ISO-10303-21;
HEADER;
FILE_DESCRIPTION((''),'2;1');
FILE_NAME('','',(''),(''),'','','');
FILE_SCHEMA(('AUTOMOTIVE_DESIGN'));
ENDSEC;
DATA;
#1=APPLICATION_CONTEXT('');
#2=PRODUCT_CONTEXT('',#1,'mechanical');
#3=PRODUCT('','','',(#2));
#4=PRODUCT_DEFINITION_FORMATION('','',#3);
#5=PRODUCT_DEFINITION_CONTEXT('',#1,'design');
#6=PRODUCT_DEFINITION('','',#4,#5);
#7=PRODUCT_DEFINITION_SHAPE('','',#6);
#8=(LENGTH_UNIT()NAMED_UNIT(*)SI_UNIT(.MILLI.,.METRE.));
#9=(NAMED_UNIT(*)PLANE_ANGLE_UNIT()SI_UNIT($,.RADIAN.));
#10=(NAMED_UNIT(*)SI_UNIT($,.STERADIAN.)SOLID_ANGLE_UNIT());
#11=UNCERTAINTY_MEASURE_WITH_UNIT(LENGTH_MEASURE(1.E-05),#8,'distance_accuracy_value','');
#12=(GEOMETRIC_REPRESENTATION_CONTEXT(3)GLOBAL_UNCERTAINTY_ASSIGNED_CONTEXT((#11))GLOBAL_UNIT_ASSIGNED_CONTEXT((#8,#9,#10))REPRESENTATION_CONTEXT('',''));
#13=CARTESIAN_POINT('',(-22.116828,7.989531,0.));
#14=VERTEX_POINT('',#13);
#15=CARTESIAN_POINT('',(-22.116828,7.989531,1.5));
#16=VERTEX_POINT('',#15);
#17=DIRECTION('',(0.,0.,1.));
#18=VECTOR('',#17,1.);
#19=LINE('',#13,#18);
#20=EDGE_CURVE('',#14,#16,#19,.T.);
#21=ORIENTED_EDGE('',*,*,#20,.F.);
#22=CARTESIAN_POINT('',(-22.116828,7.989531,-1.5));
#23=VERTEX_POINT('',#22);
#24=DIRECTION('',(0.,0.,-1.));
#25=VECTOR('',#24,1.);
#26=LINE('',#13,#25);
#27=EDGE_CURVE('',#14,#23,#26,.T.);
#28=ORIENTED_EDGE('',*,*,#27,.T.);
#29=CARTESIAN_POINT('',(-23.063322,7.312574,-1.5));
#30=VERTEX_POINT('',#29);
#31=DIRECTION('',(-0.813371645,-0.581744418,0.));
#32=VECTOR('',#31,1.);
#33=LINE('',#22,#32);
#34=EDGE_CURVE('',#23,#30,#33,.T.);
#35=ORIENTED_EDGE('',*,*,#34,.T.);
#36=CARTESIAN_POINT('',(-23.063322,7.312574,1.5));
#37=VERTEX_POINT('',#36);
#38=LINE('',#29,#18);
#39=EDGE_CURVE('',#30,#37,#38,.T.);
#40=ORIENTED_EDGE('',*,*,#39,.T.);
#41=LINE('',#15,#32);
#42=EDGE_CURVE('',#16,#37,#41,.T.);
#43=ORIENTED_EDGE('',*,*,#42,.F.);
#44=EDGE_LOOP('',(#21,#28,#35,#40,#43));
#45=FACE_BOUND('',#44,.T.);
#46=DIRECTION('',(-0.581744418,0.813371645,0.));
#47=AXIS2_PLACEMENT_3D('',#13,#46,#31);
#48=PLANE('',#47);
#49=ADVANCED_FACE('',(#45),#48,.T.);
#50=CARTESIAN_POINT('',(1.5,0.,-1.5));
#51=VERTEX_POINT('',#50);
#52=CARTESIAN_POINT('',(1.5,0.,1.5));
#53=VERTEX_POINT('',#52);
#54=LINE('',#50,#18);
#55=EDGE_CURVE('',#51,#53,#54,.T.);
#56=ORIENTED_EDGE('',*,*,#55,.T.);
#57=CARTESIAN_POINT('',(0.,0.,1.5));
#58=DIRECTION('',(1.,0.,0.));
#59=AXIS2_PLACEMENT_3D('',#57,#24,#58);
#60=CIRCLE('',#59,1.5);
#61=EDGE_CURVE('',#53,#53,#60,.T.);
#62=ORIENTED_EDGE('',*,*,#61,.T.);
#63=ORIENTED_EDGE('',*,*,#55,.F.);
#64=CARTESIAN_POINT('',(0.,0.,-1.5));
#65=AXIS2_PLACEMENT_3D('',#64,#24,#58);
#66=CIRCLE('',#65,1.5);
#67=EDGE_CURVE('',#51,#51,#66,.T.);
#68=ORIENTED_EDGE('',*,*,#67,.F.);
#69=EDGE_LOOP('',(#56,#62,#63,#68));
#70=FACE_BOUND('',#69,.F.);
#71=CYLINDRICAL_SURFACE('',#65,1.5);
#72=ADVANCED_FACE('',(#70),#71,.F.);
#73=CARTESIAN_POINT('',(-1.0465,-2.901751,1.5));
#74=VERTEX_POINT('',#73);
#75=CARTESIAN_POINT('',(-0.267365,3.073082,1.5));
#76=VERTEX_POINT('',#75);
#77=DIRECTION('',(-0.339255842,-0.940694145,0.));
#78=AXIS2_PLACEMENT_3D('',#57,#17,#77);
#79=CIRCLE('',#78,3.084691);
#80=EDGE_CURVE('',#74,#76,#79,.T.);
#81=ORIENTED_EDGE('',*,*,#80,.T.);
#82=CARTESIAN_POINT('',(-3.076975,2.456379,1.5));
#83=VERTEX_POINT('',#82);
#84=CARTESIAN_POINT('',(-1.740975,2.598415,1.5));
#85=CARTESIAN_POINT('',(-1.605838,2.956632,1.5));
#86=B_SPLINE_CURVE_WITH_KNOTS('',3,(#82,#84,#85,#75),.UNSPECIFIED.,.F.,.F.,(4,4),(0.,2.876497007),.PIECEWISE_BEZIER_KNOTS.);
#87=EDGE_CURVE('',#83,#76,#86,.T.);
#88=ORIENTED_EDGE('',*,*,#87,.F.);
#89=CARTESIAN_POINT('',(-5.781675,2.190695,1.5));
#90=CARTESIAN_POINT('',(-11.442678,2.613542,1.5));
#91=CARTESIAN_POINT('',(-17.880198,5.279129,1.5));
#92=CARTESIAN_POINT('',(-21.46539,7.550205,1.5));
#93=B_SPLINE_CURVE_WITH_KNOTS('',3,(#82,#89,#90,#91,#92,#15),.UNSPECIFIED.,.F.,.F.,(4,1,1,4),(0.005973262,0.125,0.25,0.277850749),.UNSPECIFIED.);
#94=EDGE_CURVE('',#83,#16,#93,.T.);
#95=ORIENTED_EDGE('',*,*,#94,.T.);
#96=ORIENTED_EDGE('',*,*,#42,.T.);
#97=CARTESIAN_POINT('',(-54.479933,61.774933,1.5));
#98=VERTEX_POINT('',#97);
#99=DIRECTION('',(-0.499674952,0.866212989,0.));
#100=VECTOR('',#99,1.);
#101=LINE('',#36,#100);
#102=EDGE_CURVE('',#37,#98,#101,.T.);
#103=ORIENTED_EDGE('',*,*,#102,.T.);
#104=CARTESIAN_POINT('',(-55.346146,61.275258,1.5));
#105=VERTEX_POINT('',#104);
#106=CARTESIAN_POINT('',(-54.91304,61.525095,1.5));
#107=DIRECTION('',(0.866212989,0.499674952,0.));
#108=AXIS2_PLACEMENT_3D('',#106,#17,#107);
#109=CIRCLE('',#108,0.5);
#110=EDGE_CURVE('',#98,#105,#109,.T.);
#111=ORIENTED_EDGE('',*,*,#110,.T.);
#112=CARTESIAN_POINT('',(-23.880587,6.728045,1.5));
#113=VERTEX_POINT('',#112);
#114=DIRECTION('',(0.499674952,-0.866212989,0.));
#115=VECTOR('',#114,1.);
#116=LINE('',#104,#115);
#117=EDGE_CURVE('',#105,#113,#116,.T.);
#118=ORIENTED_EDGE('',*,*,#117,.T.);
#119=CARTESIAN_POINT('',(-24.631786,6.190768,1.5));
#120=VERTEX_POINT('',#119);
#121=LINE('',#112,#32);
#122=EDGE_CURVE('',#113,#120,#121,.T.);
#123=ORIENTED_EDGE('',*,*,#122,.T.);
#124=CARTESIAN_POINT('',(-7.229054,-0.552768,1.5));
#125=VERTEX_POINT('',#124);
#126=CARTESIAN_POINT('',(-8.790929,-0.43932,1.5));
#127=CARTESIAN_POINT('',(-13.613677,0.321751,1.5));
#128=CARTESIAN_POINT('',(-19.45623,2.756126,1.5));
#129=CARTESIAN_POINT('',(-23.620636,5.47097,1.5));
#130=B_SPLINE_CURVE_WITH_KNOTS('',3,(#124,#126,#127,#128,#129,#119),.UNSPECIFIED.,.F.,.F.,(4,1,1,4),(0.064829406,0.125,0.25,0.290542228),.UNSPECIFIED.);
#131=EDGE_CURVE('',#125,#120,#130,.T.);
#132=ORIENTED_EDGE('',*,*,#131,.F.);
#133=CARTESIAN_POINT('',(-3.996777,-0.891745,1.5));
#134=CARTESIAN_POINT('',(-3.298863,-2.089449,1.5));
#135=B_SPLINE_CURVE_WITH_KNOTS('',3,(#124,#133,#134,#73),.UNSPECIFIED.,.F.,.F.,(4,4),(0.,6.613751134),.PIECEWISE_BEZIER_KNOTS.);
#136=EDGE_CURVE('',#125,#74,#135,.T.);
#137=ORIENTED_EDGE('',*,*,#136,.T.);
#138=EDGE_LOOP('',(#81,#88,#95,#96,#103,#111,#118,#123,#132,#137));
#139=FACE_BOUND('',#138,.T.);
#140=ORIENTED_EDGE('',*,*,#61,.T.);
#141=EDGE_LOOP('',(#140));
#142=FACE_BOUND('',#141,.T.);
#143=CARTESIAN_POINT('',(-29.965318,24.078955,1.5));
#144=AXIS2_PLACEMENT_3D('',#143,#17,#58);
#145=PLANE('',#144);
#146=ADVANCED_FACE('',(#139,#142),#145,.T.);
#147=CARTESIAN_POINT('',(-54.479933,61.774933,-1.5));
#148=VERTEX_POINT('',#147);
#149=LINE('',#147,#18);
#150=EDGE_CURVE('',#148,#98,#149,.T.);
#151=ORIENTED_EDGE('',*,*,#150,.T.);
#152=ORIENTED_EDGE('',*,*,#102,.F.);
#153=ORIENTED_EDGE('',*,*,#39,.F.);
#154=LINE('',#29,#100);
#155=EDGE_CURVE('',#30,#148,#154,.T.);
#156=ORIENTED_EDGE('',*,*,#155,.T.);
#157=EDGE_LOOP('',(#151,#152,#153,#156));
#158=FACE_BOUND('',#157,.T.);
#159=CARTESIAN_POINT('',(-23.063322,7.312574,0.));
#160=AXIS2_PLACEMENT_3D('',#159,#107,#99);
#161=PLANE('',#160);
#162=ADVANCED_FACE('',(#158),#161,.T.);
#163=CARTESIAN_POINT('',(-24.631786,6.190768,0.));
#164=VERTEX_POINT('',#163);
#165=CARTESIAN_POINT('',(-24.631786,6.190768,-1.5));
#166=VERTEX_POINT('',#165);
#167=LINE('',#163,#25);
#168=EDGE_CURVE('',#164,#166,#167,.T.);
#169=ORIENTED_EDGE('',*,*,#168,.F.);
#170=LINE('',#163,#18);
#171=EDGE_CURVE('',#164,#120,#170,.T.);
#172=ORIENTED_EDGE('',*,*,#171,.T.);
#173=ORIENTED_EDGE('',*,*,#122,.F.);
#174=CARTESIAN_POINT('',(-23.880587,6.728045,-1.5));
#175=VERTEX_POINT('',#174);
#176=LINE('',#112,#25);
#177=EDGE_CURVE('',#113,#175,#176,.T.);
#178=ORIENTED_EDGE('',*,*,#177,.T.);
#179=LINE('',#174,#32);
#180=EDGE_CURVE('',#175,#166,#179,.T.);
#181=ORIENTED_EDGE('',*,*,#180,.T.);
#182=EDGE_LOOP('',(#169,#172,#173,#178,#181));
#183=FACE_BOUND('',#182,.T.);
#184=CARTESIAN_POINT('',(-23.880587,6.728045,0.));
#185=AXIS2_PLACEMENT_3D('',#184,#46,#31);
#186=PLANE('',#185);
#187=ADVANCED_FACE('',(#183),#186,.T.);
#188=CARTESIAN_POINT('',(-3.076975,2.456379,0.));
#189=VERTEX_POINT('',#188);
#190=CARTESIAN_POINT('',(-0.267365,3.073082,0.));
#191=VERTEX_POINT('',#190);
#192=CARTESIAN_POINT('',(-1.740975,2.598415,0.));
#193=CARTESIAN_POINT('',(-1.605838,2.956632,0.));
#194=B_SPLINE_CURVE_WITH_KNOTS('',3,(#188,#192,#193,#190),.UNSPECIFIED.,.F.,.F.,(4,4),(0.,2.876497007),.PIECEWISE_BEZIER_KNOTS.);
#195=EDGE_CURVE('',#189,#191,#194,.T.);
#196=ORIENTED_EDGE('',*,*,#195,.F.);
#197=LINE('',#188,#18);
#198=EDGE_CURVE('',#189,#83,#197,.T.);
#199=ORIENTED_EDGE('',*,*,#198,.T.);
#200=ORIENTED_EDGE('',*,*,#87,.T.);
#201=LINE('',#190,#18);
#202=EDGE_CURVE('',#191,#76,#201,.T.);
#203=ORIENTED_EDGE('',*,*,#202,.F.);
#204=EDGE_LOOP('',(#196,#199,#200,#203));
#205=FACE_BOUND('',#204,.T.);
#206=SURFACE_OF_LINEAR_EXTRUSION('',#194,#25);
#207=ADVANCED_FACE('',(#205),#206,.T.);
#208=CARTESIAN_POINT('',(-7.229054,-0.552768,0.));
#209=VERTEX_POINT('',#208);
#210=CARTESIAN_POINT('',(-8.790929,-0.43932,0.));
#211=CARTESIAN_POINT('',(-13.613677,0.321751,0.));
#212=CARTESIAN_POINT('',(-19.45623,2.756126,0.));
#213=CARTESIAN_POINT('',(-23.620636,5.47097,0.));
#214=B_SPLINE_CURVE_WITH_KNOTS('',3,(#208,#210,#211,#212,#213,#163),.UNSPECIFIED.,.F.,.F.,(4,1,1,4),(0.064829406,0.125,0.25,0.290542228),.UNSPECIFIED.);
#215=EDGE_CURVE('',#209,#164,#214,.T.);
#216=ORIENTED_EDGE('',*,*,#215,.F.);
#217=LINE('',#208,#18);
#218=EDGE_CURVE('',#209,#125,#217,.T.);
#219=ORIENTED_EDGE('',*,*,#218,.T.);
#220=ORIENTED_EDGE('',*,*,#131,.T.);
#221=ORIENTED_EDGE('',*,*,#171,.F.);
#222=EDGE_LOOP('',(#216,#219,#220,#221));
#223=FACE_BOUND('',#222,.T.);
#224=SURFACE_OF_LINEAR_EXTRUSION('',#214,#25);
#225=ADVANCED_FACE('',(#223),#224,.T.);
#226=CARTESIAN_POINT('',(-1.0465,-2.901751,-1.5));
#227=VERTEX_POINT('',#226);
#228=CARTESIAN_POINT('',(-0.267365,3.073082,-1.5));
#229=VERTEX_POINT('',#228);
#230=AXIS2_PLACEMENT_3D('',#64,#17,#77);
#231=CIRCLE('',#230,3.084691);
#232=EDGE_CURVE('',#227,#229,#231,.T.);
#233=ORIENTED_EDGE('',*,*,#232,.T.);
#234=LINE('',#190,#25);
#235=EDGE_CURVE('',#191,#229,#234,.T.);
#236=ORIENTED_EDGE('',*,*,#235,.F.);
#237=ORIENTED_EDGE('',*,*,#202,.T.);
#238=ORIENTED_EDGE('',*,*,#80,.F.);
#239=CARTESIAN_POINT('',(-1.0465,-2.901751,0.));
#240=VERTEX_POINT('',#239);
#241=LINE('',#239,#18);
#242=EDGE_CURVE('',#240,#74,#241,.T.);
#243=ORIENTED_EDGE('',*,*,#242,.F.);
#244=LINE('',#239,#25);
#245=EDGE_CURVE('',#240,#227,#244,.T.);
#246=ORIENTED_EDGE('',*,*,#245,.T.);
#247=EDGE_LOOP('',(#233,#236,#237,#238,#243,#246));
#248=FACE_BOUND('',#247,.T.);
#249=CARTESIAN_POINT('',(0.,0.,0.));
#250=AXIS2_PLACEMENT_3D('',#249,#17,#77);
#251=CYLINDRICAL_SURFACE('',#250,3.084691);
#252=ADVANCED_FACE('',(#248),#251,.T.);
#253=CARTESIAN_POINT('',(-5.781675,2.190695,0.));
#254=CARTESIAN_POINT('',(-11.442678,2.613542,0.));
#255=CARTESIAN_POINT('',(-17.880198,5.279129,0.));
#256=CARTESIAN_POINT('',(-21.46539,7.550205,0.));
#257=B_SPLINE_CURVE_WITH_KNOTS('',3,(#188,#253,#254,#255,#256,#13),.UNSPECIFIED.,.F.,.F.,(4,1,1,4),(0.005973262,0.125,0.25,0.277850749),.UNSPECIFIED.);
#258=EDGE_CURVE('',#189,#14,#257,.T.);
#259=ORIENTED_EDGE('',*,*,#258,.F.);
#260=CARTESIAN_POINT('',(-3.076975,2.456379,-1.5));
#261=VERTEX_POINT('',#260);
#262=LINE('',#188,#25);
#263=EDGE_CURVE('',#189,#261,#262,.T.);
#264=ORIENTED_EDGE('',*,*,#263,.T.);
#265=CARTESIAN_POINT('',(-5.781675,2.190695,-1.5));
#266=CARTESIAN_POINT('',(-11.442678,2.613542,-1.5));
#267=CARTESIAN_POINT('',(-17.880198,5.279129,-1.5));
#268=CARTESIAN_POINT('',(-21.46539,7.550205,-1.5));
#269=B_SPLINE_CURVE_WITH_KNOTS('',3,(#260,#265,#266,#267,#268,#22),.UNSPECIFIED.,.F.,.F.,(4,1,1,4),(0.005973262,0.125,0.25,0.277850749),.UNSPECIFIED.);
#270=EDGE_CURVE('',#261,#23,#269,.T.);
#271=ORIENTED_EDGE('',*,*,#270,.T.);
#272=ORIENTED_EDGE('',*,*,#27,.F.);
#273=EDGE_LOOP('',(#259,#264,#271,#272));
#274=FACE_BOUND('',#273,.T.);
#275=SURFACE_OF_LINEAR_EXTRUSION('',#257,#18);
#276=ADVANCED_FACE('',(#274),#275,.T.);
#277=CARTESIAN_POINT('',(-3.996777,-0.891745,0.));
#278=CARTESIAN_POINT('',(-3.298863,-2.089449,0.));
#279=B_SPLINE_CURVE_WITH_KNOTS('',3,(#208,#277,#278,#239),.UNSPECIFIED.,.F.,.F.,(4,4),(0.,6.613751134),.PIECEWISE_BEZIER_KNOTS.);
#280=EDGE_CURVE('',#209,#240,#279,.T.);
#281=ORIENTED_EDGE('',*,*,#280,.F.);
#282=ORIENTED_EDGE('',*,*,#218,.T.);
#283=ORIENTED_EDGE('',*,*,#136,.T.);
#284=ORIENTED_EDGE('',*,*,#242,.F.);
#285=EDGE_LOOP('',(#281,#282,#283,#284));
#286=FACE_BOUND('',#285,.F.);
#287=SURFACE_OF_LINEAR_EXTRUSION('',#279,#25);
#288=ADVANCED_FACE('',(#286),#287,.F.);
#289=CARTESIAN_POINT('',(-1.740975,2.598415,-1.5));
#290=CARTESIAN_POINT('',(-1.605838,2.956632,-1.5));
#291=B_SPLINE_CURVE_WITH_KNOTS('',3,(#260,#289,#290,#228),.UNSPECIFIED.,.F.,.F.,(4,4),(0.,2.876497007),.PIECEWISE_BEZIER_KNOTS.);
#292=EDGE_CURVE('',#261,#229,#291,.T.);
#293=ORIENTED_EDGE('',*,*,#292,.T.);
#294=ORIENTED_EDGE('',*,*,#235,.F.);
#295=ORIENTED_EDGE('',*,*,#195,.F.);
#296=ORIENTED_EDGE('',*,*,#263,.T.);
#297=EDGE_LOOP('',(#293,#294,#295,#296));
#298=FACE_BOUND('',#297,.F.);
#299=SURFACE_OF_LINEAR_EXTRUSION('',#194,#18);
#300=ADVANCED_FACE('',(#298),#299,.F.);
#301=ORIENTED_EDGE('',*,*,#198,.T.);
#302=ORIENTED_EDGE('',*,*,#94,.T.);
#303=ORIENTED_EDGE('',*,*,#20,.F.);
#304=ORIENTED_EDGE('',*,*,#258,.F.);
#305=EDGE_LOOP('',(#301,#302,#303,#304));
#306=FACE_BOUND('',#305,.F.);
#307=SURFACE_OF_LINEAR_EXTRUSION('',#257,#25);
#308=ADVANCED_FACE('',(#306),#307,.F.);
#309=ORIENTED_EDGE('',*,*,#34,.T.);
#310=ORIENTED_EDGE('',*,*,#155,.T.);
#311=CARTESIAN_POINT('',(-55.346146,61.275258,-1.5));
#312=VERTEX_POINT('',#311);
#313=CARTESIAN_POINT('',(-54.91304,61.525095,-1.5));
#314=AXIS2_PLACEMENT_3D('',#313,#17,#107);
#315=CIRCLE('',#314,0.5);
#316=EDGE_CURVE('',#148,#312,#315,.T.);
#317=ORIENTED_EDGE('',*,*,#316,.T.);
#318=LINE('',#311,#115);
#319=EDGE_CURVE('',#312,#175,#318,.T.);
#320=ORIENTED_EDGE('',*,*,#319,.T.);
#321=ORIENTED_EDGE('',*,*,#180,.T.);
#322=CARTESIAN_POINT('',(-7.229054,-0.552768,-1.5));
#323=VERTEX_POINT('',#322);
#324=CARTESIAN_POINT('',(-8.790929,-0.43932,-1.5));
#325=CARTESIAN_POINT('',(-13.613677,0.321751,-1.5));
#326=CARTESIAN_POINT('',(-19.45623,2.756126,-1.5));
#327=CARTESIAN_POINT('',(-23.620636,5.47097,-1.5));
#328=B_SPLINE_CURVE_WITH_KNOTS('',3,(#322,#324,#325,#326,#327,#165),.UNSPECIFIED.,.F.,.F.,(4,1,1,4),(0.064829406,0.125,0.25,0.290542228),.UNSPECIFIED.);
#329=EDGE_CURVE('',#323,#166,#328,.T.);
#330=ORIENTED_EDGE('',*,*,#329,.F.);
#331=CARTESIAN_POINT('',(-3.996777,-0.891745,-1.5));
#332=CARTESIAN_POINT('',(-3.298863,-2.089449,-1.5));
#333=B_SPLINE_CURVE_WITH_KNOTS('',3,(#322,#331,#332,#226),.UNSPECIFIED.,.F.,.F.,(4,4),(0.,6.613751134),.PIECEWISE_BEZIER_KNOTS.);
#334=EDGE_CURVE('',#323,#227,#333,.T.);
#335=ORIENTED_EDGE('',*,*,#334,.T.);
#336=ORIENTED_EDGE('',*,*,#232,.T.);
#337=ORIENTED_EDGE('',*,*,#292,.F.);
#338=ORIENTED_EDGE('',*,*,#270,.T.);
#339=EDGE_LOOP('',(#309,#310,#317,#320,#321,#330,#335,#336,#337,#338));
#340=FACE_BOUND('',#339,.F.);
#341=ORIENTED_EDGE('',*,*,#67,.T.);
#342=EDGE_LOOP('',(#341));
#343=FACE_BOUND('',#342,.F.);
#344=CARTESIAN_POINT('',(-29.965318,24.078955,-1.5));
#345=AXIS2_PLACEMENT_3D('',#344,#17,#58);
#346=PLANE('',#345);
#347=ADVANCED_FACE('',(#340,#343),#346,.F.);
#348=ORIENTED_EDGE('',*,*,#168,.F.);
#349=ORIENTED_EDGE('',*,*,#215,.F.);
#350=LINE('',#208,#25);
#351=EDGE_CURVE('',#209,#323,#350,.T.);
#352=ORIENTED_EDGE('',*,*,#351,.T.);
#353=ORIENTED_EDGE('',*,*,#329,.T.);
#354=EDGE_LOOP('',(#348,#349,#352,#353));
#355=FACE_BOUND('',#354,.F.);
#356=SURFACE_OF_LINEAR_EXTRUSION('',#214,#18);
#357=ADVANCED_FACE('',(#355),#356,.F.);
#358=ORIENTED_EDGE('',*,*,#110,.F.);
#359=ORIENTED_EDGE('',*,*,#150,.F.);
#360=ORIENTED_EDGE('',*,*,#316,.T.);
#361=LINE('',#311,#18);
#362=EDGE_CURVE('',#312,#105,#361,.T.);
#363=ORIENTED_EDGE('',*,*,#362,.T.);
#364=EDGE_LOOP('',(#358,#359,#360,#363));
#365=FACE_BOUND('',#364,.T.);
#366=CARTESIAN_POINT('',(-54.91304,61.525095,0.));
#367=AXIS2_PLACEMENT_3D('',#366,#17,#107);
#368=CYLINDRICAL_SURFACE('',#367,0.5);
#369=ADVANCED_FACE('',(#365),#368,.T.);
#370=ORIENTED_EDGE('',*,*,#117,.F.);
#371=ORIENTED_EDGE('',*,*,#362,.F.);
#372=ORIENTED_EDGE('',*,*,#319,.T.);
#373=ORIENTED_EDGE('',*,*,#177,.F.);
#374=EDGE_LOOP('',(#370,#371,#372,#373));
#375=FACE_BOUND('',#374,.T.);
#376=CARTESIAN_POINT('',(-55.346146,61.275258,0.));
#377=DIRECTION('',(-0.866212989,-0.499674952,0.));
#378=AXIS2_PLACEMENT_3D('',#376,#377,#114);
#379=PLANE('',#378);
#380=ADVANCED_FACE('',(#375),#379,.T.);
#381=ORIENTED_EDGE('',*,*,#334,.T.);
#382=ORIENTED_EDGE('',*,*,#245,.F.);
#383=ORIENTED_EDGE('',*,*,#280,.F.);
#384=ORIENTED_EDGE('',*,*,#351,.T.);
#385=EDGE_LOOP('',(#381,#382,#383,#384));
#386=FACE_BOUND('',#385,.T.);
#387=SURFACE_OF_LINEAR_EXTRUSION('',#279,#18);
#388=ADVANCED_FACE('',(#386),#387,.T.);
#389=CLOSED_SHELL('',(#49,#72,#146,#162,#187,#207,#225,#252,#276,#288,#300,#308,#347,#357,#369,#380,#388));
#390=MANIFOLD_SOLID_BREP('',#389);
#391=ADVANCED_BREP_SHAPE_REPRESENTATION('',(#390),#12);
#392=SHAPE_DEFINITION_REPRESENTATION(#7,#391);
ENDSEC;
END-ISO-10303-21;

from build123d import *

# Parameters (mm, degrees)
F1_DEPTH = 1.5
F2_R     = 1.5
F3_DEPTH = 25


# Not quite as in the source:
# - the dataset's text gives a spline's control points without its knots; the knots are read off the source's solid


with BuildPart() as f1:
    # F0 (on Top) → F1 (new body, symmetric)
    with BuildSketch(Plane.XY):
        with BuildLine():
            add(Edge.make_bspline(
                [(-7.2290541015, -0.5527675977), (-3.9967772573, -0.8917449116), (-3.2988634653, -2.0894490401), (-1.0464995032, -2.9017509308)],
                knots=[0, 0, 0, 0, 6.6137511338, 6.6137511338, 6.6137511338, 6.6137511338], degree=3))
            ThreePointArc((-1.0464995032, -2.9017509308), (3.0587935975, -0.3988751709), (-0.2673646533, 3.0730824617))
            add(Edge.make_bspline(
                [(-3.0769753559, 2.4563793473), (-1.7409748989, 2.5984151431), (-1.6058379576, 2.9566324623), (-0.2673646533, 3.0730824617)],
                knots=[0, 0, 0, 0, 2.876497007, 2.876497007, 2.876497007, 2.876497007], degree=3))
            add(Edge.make_bspline(
                [(-3.0769753559, 2.4563793473), (-5.7816746579, 2.1906947352), (-11.4426782467, 2.6135423344), (-17.8801982674, 5.2791288997), (-21.4653904829, 7.5502048837), (-22.1168282691, 7.9895307861)],
                knots=[0.005973262, 0.005973262, 0.005973262, 0.005973262, 0.125, 0.25, 0.277850749, 0.277850749, 0.277850749, 0.277850749], degree=3))
            Line((-22.1168282691, 7.9895307861), (-23.0633222923, 7.3125738031))
            Line((-23.0633222923, 7.3125738031), (-54.4799332581, 61.7749325905))
            ThreePointArc((-54.4799332581, 61.7749325905), (-55.1628772285, 61.9582016093), (-55.3461462473, 61.2752576388))
            Line((-55.3461462473, 61.2752576388), (-23.8805872256, 6.7280448046))
            Line((-23.8805872256, 6.7280448046), (-24.6317860127, 6.1907680209))
            add(Edge.make_bspline(
                [(-7.2290541015, -0.5527675977), (-8.7909293011, -0.4393198693), (-13.6136774425, 0.3217510425), (-19.4562298082, 2.7561257866), (-23.6206363974, 5.4709704249), (-24.6317860127, 6.1907680209)],
                knots=[0.064829406, 0.064829406, 0.064829406, 0.064829406, 0.125, 0.25, 0.290542228, 0.290542228, 0.290542228, 0.290542228], degree=3))
        make_face()
    extrude(amount=F1_DEPTH, both=True)

    # F2 (on face) → F3 (cut)
    with BuildSketch(Plane(origin=(0, 0, -1.5), x_dir=(1, 0, 0), z_dir=(0, 0, -1))):
        Circle(F2_R)
    extrude(amount=-F3_DEPTH, mode=Mode.SUBTRACT)


solid = f1.part
